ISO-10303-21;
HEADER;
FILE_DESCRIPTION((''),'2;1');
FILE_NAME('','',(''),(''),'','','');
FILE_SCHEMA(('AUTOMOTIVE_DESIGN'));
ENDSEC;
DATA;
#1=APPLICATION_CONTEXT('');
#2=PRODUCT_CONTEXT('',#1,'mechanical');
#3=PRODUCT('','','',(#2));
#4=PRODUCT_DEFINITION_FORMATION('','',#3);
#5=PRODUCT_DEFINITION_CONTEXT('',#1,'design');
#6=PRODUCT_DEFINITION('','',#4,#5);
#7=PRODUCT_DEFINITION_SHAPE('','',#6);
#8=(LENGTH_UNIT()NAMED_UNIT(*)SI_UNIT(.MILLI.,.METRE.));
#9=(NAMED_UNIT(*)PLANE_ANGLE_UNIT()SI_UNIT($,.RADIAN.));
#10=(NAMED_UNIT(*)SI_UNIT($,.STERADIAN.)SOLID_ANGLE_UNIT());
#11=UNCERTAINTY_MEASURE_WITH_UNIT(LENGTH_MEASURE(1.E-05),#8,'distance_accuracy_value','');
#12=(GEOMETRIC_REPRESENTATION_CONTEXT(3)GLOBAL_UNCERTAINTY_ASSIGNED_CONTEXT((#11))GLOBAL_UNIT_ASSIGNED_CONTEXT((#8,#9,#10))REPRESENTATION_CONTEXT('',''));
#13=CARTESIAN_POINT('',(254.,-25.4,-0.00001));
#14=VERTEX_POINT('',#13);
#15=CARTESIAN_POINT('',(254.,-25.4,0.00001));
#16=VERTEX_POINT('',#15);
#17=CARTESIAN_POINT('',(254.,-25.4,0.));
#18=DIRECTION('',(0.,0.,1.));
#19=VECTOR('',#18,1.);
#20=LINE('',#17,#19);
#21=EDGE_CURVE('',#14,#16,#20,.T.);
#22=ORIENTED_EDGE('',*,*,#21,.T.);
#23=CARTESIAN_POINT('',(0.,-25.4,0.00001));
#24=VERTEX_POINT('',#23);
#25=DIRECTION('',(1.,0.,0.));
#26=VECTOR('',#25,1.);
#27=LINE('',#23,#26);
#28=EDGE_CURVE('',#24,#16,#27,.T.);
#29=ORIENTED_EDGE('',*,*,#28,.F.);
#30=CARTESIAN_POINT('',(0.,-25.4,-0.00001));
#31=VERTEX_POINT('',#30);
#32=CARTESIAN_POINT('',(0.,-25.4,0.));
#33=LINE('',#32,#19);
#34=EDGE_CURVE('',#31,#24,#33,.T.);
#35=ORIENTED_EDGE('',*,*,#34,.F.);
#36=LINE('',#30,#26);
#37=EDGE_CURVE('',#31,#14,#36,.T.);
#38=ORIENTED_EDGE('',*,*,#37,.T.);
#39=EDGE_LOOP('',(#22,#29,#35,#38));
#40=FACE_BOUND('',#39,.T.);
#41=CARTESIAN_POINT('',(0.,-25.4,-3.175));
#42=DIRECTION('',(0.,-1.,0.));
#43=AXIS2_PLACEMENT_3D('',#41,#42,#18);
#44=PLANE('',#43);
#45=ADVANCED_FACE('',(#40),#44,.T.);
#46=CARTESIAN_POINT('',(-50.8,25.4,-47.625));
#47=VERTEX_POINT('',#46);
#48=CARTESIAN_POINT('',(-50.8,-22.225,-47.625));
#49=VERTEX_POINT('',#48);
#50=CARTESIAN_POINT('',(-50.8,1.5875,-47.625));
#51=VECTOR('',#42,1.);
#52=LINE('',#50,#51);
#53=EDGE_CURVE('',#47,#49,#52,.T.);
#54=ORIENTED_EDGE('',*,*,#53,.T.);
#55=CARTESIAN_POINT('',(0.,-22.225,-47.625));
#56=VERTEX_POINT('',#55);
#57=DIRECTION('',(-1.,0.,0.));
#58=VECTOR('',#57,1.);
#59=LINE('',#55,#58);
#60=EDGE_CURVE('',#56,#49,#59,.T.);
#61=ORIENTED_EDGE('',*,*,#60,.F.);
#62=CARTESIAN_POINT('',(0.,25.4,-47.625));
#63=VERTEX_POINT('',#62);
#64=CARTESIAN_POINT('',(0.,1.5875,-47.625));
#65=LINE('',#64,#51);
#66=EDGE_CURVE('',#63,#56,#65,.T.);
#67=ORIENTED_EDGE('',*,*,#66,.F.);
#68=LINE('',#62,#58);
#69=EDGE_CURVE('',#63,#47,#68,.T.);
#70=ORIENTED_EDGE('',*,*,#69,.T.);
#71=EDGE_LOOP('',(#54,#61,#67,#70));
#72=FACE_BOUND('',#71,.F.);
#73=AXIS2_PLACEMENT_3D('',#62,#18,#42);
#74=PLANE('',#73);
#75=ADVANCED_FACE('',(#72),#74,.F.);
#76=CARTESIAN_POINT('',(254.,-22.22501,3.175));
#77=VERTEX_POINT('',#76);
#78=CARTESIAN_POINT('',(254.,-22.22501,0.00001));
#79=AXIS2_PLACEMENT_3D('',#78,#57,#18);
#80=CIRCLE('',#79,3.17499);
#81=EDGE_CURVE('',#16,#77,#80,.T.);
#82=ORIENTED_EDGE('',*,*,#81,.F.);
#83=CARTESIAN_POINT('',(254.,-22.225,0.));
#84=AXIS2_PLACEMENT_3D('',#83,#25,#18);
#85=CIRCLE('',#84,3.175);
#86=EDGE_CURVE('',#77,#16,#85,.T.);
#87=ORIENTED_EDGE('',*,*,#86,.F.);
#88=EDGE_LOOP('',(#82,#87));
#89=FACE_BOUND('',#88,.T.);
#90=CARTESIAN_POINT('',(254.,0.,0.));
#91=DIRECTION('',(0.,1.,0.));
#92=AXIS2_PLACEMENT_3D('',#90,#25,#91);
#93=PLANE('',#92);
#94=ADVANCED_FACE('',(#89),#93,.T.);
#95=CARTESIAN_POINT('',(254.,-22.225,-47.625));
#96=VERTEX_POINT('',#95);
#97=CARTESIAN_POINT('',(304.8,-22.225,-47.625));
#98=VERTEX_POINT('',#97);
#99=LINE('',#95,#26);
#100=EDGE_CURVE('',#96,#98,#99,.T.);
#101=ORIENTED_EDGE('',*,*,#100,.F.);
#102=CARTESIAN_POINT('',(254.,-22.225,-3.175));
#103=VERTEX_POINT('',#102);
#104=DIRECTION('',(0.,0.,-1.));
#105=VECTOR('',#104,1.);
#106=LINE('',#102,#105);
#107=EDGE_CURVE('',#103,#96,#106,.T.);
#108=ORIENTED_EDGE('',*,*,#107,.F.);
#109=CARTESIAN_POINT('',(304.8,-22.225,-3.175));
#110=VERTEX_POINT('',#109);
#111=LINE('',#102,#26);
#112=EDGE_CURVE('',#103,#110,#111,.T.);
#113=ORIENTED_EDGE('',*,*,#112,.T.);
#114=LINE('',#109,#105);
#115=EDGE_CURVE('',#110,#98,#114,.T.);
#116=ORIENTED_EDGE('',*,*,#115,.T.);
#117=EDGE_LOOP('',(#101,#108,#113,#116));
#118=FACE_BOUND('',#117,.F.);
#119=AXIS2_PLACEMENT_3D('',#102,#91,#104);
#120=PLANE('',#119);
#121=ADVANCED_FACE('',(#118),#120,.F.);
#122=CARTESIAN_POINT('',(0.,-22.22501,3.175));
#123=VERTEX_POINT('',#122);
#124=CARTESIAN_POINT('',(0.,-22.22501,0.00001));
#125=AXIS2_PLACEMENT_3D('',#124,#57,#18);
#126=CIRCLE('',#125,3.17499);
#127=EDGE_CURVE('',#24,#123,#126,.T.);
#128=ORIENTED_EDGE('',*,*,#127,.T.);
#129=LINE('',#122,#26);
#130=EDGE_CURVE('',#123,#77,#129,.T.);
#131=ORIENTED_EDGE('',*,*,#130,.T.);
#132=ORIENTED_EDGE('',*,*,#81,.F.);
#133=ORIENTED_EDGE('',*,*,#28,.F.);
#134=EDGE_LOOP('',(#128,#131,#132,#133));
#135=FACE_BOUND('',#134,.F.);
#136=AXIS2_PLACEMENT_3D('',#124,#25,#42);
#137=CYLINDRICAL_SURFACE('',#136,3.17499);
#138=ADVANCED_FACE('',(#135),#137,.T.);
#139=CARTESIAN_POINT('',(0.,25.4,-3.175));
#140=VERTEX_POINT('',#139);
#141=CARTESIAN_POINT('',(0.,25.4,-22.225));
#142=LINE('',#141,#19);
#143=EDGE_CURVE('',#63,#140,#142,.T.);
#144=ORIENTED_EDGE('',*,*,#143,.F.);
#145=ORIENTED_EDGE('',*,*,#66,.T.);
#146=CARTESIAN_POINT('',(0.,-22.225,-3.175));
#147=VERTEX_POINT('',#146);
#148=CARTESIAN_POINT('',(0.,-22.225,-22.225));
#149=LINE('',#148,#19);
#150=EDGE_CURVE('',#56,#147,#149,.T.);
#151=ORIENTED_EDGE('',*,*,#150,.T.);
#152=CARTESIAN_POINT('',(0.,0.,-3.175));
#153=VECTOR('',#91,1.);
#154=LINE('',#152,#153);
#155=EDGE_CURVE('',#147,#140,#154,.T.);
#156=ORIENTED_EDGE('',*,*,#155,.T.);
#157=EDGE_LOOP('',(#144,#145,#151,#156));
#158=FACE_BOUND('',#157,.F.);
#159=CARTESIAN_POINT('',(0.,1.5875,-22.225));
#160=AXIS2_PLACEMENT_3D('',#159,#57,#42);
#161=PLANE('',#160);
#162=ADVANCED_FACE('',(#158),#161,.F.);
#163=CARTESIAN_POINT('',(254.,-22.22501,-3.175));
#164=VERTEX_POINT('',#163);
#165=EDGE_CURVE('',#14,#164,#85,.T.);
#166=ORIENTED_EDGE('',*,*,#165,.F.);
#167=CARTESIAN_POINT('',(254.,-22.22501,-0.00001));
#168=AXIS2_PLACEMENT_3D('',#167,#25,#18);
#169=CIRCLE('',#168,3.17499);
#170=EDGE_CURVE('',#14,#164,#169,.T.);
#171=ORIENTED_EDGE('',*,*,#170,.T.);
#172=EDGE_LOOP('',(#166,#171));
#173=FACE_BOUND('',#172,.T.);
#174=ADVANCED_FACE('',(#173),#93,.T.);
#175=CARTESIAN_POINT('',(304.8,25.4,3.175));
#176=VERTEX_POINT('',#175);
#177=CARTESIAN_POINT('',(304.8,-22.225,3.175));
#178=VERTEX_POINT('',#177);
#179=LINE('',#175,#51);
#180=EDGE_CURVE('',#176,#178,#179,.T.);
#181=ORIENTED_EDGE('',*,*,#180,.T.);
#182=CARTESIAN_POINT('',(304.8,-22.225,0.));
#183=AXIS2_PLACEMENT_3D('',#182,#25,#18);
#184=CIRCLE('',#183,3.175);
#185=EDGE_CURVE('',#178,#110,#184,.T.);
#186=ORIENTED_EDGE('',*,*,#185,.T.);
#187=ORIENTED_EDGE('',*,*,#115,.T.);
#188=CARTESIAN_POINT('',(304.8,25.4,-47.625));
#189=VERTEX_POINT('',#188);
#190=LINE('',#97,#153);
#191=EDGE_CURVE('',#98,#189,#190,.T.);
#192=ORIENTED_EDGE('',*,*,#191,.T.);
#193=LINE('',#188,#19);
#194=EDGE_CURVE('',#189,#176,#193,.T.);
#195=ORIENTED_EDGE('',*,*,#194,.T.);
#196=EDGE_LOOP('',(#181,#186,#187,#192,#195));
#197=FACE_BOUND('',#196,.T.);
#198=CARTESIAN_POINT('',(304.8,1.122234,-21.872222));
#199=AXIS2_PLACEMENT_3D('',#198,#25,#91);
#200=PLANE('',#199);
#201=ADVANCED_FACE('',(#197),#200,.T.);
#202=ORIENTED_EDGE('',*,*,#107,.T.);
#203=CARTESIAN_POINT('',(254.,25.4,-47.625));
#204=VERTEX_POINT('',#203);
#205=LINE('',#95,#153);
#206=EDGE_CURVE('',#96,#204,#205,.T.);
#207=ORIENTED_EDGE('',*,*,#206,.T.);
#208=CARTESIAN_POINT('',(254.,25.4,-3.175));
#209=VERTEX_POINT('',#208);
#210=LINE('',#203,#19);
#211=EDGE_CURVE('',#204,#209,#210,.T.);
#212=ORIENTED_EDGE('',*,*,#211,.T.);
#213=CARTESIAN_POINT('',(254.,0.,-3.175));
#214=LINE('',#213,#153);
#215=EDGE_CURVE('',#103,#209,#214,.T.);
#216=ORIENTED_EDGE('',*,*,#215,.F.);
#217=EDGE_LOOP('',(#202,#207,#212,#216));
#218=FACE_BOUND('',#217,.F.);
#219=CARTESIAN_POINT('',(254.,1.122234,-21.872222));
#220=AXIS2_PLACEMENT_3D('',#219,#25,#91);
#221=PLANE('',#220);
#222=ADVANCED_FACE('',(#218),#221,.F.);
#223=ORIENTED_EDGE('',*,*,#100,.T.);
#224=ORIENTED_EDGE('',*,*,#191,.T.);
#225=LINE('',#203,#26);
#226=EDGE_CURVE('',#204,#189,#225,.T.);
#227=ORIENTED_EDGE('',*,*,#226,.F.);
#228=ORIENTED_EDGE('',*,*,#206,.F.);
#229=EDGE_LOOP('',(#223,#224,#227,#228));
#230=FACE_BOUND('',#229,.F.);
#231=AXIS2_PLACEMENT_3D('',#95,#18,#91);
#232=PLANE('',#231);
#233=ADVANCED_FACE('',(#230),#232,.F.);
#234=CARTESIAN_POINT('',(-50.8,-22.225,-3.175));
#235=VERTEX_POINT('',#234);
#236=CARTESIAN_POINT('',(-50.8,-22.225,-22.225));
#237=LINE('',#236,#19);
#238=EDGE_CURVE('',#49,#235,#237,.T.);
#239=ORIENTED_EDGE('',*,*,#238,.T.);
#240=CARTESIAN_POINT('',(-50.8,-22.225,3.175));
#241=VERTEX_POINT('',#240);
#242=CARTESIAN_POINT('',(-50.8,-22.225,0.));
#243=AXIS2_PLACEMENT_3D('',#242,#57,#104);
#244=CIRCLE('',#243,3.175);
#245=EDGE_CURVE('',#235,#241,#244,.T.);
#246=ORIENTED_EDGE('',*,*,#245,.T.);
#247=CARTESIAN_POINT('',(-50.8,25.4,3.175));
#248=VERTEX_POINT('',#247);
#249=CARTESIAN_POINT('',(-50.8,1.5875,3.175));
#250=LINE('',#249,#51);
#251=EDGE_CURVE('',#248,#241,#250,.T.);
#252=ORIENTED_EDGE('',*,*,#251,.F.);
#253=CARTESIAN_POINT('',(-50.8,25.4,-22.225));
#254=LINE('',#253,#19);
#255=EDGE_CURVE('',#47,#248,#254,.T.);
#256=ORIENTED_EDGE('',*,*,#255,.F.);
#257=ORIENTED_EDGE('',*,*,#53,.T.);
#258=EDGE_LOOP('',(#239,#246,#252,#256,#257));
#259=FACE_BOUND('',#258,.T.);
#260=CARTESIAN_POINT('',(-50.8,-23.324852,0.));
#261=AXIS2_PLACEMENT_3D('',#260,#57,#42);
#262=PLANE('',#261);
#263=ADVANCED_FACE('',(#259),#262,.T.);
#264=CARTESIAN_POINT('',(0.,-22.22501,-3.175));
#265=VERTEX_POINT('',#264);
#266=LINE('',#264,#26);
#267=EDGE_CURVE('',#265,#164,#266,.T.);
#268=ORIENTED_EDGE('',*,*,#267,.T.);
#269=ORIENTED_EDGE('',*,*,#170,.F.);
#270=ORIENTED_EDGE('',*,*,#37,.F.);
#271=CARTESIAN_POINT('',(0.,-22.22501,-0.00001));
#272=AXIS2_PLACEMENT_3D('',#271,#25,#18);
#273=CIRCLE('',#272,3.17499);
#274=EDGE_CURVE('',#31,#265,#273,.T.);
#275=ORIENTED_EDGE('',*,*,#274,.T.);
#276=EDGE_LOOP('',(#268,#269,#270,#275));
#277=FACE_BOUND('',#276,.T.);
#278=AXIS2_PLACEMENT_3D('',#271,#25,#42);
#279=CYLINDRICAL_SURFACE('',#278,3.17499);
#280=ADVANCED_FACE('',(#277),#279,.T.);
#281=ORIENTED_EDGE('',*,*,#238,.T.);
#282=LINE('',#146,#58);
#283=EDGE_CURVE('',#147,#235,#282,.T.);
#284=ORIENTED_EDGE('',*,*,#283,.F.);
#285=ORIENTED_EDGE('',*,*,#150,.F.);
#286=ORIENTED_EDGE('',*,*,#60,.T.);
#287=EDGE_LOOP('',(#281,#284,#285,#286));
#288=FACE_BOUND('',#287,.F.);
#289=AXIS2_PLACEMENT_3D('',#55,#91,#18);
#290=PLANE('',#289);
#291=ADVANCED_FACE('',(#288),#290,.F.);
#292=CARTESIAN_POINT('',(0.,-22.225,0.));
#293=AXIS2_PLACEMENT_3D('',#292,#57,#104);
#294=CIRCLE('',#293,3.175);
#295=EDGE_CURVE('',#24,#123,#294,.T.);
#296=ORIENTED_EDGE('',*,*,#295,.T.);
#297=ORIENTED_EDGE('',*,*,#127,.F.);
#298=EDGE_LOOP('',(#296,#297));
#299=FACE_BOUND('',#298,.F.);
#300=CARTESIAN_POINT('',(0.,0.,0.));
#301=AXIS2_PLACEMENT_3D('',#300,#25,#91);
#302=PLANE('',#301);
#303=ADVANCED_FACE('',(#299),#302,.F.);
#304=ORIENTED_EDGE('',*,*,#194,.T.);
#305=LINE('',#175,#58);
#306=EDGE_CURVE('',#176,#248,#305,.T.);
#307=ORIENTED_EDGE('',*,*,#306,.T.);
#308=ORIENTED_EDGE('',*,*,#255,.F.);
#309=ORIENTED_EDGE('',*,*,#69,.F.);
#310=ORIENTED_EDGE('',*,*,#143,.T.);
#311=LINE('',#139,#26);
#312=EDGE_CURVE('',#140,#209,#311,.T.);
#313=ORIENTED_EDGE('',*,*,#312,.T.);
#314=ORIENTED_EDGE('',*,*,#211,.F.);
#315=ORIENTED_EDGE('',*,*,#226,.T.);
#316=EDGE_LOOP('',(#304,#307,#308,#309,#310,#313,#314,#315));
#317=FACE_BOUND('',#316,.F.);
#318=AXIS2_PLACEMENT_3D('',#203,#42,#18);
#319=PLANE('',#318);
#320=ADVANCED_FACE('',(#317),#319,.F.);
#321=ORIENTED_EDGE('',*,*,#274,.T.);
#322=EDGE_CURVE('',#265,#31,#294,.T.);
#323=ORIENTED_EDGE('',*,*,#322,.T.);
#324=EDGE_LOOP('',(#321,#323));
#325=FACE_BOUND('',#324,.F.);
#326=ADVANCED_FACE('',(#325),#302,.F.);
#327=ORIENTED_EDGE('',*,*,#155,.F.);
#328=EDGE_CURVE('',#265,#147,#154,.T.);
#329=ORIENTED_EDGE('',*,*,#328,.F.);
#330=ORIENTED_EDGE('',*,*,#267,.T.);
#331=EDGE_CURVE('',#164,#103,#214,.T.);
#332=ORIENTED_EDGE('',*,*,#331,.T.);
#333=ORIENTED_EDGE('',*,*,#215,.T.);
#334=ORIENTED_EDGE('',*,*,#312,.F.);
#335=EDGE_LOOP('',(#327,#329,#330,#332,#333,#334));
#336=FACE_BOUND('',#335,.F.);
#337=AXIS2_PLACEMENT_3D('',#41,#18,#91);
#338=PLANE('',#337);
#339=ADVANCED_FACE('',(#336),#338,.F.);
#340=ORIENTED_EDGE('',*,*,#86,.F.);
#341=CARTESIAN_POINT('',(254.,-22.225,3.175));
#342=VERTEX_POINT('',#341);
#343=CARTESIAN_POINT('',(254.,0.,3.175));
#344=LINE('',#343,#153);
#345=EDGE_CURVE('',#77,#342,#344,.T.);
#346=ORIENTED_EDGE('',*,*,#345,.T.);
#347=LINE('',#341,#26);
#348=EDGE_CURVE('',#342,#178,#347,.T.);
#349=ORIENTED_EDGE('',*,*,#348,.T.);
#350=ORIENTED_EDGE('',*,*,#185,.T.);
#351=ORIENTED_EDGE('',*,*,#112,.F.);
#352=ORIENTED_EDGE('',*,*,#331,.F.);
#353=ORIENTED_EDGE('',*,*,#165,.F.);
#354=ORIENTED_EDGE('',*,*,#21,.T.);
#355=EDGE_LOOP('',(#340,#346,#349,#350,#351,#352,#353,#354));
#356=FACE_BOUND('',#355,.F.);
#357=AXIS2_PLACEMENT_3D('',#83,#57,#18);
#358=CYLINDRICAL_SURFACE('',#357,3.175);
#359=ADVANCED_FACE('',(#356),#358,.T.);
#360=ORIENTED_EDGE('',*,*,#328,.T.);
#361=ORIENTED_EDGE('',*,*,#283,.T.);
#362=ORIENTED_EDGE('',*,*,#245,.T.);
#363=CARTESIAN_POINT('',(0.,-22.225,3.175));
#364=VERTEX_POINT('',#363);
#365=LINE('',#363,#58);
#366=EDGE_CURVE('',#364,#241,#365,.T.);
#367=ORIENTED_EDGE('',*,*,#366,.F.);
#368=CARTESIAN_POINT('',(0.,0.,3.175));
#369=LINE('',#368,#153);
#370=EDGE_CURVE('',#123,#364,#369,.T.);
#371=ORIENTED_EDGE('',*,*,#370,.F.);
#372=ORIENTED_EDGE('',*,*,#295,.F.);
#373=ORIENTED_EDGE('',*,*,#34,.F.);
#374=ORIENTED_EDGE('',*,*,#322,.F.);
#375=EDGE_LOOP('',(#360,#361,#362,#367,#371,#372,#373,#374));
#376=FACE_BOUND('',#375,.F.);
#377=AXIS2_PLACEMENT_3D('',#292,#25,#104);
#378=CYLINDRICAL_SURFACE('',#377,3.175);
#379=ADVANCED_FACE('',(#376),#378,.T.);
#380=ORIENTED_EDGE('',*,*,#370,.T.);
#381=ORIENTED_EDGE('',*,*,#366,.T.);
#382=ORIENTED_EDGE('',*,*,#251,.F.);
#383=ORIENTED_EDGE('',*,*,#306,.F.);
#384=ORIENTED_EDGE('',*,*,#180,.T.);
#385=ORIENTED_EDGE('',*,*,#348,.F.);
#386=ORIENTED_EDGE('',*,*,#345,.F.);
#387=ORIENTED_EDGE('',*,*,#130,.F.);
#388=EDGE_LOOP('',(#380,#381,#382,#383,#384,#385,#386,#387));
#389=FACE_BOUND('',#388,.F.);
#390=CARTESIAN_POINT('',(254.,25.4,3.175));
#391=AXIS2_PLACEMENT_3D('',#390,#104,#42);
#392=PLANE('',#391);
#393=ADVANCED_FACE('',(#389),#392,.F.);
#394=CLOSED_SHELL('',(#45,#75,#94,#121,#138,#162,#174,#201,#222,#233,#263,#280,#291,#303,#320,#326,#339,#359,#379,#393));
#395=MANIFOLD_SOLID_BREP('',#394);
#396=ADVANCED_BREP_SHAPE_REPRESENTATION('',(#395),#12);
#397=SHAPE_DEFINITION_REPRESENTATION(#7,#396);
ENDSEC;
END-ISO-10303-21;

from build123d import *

# Parameters (mm, degrees)
F0_W     = 50.8
F0_H     = 6.35
F1_DEPTH = 254
F2_R     = 3.17499
F3_W     = 47.625
F3_H     = 50.8
F4_DEPTH = 50.8
F6_DEPTH = 50.8
F8_DEPTH = 50.8


# Not quite as in the source:
# - a fillet or chamfer is up to 0.001 mm smaller than in the source, because OpenCascade refuses the exact size


with BuildPart() as f1:
    # F0 (on Right) → F1 (new body)
    with BuildSketch(Plane.YZ):
        Rectangle(F0_W, F0_H)
    extrude(amount=F1_DEPTH)

    # F2 (radius 3.175 in the source; OpenCascade refuses exactly that, so slightly less here)
    f2_edges = [f1.edges().sort_by_distance(p)[0] for p in [
        (127, -25.4, 3.175),
        (127, -25.4, -3.175),
    ]]
    fillet(f2_edges, radius=F2_R)

    # F3 (on face) → F4 (join)
    with BuildSketch(Plane(origin=(0, 0, 0), x_dir=(0, -1, 0), z_dir=(-1, 0, 0))):
        with Locations((-1.5875, -22.225)):
            Rectangle(F3_W, F3_H)
    extrude(amount=F4_DEPTH)

    # F5 (on face) → F6 (join, through all)
    with BuildSketch(Plane(origin=(0, 0, 0), x_dir=(0, -1, 0), z_dir=(-1, 0, 0))):
        with BuildLine():
            Line((22.225, 3.175), (22.225, -3.175))
            ThreePointArc((22.225, -3.175), (25.4, 0), (22.225, 3.175))
        make_face()
    extrude(amount=F6_DEPTH)

    # F7 (on face) → F8 (join)
    with BuildSketch(Plane.YZ.offset(254)):
        with BuildLine():
            Line((-22.225, -3.175), (-22.225, -47.625))
            Line((-22.225, -47.625), (25.4, -47.625))
            Line((25.4, -47.625), (25.4, 3.175))
            Line((25.4, 3.175), (-22.225, 3.175))
            ThreePointArc((-22.225, 3.175), (-25.4, 0), (-22.225, -3.175))
        make_face()
    extrude(amount=F8_DEPTH)


solid = f1.part
